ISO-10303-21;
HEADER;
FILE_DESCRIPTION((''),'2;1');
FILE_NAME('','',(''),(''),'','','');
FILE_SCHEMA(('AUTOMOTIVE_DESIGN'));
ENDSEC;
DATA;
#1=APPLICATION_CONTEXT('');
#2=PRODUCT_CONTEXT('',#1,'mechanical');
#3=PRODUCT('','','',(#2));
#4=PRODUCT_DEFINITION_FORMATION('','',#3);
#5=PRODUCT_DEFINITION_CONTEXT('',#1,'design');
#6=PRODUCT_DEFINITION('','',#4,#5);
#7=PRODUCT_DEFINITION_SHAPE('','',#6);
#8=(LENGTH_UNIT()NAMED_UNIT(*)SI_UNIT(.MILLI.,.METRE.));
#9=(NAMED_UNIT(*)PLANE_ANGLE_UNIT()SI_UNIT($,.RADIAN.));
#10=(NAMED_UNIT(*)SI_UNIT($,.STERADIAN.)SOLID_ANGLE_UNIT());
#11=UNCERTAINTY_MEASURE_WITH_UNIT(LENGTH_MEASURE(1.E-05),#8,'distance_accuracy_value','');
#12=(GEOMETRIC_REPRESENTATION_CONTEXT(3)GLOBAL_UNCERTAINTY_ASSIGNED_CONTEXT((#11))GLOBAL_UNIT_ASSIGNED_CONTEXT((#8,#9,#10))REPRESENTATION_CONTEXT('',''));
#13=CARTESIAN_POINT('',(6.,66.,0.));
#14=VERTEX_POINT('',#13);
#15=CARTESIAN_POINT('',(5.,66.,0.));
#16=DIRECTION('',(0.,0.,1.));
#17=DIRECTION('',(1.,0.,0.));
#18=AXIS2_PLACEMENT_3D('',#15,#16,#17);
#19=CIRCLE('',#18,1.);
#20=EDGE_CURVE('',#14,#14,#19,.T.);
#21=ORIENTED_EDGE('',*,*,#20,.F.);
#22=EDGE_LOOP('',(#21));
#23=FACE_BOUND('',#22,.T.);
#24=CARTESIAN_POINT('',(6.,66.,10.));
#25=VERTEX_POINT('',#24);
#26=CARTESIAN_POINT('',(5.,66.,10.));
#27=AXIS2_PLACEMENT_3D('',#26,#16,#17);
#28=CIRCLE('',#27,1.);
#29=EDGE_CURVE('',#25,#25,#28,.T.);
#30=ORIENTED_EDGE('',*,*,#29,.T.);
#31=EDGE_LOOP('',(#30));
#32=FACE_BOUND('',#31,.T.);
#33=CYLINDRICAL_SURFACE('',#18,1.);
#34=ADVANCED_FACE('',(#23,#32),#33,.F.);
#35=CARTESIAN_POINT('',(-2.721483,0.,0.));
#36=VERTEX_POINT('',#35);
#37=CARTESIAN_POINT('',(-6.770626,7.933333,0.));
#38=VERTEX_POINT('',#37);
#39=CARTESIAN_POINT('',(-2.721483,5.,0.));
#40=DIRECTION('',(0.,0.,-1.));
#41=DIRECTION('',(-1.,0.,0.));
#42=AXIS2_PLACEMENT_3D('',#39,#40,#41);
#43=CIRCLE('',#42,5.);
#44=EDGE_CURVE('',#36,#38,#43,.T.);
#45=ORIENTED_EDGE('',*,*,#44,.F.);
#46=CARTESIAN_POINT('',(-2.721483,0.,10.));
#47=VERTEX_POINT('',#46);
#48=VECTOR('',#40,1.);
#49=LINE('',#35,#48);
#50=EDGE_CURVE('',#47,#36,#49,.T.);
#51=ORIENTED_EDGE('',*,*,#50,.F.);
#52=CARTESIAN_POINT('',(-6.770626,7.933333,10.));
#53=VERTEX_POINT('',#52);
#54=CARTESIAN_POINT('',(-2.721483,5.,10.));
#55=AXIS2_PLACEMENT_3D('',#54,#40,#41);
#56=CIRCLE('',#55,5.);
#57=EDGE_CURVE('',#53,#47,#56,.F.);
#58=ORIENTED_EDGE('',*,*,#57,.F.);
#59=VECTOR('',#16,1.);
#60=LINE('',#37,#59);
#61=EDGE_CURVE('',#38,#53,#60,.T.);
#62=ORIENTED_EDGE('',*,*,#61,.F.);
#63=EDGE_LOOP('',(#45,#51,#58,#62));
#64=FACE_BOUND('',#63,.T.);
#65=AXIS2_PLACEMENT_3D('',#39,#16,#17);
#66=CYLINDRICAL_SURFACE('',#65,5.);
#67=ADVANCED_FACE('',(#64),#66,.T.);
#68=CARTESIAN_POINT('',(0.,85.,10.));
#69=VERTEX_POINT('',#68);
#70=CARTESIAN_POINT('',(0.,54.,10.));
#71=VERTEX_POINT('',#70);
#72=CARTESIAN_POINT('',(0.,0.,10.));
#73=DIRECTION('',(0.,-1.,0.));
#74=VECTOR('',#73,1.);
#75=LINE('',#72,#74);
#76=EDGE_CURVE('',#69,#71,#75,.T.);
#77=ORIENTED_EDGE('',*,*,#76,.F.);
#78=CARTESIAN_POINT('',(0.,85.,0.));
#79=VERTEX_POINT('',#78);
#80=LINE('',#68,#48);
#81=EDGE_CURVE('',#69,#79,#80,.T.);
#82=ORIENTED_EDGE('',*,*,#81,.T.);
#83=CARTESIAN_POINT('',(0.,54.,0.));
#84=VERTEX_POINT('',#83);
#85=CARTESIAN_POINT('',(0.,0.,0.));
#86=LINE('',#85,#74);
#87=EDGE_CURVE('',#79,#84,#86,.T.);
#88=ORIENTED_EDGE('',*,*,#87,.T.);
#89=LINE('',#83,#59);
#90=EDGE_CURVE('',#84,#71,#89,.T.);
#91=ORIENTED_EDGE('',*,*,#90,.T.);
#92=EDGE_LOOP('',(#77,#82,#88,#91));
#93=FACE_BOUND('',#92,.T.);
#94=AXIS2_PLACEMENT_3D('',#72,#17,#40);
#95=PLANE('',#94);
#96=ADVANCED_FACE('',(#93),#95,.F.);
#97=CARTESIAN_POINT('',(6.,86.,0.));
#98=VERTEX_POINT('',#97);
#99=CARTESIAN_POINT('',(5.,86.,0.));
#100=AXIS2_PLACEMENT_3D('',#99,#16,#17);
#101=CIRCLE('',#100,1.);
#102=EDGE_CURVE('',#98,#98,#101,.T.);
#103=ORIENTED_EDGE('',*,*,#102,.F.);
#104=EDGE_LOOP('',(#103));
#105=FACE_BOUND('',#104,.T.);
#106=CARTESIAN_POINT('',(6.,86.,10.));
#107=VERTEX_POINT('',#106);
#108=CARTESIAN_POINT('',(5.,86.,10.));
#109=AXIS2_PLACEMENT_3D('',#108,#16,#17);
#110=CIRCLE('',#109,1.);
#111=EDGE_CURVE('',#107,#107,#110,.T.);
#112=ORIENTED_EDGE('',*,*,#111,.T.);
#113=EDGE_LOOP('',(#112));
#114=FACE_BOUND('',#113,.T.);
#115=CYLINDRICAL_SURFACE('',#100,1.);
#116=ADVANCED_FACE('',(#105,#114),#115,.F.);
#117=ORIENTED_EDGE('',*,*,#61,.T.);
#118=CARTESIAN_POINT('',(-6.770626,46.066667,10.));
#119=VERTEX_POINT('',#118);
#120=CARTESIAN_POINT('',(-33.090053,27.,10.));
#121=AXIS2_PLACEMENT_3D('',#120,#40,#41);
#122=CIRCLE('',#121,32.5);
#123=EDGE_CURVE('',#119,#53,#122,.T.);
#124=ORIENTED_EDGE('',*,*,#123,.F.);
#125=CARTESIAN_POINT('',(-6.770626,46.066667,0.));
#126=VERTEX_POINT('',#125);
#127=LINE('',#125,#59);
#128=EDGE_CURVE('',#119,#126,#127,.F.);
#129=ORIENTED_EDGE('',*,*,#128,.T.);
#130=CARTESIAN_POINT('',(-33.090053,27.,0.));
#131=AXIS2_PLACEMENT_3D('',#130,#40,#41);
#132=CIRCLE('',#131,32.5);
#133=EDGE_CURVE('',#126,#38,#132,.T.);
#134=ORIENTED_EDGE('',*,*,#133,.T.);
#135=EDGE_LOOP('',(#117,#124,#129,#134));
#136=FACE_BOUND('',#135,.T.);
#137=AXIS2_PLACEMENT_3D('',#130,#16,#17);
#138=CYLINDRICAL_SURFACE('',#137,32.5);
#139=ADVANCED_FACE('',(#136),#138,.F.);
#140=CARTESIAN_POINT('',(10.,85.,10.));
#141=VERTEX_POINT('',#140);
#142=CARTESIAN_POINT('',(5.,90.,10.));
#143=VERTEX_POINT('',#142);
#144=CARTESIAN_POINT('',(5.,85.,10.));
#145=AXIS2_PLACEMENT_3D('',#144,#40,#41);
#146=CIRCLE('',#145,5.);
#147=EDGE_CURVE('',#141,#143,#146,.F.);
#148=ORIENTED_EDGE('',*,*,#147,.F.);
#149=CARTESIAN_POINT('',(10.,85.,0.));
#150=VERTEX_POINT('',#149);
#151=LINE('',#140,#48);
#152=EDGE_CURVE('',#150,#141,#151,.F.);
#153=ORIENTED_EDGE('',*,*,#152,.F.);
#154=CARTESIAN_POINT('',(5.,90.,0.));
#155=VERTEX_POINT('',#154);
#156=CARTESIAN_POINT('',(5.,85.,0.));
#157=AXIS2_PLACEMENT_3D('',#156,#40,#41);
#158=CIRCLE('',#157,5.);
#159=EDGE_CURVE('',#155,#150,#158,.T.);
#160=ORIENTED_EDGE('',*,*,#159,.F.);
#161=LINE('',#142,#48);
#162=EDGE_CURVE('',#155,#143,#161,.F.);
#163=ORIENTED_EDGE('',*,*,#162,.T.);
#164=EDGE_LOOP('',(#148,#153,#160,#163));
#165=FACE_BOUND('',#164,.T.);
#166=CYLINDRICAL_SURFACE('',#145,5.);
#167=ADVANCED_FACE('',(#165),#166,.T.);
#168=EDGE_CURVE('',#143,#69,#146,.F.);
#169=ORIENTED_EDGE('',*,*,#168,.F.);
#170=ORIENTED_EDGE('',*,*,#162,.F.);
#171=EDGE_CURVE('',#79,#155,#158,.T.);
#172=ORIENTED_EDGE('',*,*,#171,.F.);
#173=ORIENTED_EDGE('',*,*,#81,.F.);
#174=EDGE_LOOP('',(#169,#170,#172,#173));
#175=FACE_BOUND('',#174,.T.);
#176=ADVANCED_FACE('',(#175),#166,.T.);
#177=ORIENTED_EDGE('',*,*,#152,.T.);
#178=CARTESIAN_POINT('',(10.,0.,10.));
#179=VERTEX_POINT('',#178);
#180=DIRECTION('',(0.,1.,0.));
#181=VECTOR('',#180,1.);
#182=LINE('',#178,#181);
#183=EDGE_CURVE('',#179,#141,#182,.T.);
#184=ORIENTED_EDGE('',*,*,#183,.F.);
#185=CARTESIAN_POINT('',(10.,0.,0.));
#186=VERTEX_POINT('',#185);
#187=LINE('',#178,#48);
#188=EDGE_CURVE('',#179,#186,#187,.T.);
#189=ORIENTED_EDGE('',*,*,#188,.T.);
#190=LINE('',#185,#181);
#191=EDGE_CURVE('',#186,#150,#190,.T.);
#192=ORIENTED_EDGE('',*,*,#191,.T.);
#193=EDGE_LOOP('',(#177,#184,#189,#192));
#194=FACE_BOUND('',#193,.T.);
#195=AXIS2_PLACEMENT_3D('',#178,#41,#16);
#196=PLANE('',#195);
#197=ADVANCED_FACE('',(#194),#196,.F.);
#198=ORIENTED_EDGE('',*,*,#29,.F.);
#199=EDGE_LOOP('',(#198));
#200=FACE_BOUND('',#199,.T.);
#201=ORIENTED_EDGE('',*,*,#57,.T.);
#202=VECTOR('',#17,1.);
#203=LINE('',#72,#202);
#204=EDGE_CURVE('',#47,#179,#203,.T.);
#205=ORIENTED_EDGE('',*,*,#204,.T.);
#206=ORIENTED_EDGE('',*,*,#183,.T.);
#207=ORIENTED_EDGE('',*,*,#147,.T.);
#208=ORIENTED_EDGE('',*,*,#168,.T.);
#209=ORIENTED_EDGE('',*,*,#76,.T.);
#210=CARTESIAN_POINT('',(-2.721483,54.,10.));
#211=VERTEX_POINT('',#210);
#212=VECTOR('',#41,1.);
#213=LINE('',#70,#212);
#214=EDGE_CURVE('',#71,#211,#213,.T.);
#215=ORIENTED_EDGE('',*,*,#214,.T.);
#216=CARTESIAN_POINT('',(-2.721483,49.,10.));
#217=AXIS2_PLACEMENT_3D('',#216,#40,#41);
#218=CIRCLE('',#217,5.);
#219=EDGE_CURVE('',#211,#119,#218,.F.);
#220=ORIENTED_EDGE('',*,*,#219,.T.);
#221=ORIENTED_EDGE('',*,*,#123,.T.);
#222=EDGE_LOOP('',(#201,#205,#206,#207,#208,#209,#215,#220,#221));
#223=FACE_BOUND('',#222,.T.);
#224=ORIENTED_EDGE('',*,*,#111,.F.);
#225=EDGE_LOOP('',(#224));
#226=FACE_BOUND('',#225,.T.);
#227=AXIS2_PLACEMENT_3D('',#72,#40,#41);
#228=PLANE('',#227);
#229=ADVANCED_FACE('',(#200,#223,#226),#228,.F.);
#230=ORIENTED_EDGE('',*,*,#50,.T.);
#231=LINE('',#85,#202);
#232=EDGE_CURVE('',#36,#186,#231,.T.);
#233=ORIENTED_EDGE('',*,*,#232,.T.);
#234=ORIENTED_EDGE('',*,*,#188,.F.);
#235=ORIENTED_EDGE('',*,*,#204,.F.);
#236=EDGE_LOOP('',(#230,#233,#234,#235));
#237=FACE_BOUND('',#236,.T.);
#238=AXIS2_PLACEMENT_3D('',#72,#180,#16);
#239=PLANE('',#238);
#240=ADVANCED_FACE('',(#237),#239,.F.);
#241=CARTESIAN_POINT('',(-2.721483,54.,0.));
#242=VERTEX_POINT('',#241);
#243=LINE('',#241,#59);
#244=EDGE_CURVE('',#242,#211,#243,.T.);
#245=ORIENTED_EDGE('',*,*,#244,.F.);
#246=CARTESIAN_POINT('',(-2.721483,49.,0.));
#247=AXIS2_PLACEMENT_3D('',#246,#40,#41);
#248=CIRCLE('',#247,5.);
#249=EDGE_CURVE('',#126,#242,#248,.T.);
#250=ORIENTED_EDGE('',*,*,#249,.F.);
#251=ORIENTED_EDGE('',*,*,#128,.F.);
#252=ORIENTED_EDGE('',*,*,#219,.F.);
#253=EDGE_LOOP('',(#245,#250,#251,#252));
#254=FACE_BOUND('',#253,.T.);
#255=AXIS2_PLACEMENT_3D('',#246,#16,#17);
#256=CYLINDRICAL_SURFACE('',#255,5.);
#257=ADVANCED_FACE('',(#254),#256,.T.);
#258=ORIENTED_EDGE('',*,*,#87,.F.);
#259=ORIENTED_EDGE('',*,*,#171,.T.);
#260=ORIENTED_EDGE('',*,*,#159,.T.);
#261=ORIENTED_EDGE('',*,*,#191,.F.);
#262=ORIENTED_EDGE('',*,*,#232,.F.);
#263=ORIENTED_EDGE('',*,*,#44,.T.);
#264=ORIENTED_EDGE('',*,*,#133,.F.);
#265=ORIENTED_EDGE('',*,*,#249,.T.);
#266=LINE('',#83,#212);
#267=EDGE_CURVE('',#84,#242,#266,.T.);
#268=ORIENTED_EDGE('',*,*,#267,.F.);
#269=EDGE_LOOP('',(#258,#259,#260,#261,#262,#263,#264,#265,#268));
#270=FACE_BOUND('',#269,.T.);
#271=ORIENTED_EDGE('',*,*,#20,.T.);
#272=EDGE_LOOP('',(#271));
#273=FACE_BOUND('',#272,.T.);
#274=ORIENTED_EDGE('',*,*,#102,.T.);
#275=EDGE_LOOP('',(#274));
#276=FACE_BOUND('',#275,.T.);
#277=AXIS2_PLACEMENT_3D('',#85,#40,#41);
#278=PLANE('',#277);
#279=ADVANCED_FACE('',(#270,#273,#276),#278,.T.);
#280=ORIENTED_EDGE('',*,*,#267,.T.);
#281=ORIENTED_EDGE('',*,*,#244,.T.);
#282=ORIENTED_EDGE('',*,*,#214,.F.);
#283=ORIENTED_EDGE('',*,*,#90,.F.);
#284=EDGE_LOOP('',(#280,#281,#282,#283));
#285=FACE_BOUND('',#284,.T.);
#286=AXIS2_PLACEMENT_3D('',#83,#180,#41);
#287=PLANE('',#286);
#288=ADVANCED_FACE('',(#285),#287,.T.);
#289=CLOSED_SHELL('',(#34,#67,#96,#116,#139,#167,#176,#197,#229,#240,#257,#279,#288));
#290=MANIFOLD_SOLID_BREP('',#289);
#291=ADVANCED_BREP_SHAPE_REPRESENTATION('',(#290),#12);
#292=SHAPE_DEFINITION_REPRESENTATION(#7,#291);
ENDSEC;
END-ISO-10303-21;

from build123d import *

# Parameters (mm, degrees)
ESQUISSE1_W             = 10
ESQUISSE1_H             = 90
BOSS_EXTRU_1_DEPTH      = 10
ESQUISSE2_R             = 1
ENL_V_MAT_EXTRU_1_DEPTH = 10
CONG_1_R                = 5
BOSS_EXTRU_2_DEPTH      = 10
CONG_2_R                = 5


with BuildPart() as part:
    # Esquisse1 → Boss.-Extru.1 (new body)
    with BuildSketch(Plane.XY):
        with Locations((5, 45)):
            Rectangle(ESQUISSE1_W, ESQUISSE1_H)
    extrude(amount=BOSS_EXTRU_1_DEPTH)

    # Esquisse2 → Enlèv. mat.-Extru.1 (cut)
    with BuildSketch(Plane.XY.offset(10)):
        with Locations((5, 66)):
            Circle(ESQUISSE2_R)
        with Locations((5, 86)):
            Circle(ESQUISSE2_R)
    extrude(amount=-ENL_V_MAT_EXTRU_1_DEPTH, mode=Mode.SUBTRACT)

    # Congé1
    cong_1_edges = [part.edges().sort_by_distance(p)[0] for p in [
        (10, 90, 5),
        (0, 90, 5),
    ]]
    fillet(cong_1_edges, radius=CONG_1_R - 0.0001)  # a hair under: the kernel refuses the full size

    # Esquisse3 → Boss.-Extru.2 (add)
    with BuildSketch(Plane.XY.offset(10)):
        with BuildLine():
            Line((0, 0), (0, 54))
            Line((0, 54), (-15, 54))
            ThreePointArc((-15, 54), (-0.590052515, 27), (-15, 0))
            Line((-15, 0), (0, 0))
        make_face()
    extrude(amount=-BOSS_EXTRU_2_DEPTH)

    # Congé2
    cong_2_edges = [part.edges().sort_by_distance(p)[0] for p in [
        (-15, 0, 5),
        (-15, 54, 5),
    ]]
    fillet(cong_2_edges, radius=CONG_2_R)


solid = part.part
